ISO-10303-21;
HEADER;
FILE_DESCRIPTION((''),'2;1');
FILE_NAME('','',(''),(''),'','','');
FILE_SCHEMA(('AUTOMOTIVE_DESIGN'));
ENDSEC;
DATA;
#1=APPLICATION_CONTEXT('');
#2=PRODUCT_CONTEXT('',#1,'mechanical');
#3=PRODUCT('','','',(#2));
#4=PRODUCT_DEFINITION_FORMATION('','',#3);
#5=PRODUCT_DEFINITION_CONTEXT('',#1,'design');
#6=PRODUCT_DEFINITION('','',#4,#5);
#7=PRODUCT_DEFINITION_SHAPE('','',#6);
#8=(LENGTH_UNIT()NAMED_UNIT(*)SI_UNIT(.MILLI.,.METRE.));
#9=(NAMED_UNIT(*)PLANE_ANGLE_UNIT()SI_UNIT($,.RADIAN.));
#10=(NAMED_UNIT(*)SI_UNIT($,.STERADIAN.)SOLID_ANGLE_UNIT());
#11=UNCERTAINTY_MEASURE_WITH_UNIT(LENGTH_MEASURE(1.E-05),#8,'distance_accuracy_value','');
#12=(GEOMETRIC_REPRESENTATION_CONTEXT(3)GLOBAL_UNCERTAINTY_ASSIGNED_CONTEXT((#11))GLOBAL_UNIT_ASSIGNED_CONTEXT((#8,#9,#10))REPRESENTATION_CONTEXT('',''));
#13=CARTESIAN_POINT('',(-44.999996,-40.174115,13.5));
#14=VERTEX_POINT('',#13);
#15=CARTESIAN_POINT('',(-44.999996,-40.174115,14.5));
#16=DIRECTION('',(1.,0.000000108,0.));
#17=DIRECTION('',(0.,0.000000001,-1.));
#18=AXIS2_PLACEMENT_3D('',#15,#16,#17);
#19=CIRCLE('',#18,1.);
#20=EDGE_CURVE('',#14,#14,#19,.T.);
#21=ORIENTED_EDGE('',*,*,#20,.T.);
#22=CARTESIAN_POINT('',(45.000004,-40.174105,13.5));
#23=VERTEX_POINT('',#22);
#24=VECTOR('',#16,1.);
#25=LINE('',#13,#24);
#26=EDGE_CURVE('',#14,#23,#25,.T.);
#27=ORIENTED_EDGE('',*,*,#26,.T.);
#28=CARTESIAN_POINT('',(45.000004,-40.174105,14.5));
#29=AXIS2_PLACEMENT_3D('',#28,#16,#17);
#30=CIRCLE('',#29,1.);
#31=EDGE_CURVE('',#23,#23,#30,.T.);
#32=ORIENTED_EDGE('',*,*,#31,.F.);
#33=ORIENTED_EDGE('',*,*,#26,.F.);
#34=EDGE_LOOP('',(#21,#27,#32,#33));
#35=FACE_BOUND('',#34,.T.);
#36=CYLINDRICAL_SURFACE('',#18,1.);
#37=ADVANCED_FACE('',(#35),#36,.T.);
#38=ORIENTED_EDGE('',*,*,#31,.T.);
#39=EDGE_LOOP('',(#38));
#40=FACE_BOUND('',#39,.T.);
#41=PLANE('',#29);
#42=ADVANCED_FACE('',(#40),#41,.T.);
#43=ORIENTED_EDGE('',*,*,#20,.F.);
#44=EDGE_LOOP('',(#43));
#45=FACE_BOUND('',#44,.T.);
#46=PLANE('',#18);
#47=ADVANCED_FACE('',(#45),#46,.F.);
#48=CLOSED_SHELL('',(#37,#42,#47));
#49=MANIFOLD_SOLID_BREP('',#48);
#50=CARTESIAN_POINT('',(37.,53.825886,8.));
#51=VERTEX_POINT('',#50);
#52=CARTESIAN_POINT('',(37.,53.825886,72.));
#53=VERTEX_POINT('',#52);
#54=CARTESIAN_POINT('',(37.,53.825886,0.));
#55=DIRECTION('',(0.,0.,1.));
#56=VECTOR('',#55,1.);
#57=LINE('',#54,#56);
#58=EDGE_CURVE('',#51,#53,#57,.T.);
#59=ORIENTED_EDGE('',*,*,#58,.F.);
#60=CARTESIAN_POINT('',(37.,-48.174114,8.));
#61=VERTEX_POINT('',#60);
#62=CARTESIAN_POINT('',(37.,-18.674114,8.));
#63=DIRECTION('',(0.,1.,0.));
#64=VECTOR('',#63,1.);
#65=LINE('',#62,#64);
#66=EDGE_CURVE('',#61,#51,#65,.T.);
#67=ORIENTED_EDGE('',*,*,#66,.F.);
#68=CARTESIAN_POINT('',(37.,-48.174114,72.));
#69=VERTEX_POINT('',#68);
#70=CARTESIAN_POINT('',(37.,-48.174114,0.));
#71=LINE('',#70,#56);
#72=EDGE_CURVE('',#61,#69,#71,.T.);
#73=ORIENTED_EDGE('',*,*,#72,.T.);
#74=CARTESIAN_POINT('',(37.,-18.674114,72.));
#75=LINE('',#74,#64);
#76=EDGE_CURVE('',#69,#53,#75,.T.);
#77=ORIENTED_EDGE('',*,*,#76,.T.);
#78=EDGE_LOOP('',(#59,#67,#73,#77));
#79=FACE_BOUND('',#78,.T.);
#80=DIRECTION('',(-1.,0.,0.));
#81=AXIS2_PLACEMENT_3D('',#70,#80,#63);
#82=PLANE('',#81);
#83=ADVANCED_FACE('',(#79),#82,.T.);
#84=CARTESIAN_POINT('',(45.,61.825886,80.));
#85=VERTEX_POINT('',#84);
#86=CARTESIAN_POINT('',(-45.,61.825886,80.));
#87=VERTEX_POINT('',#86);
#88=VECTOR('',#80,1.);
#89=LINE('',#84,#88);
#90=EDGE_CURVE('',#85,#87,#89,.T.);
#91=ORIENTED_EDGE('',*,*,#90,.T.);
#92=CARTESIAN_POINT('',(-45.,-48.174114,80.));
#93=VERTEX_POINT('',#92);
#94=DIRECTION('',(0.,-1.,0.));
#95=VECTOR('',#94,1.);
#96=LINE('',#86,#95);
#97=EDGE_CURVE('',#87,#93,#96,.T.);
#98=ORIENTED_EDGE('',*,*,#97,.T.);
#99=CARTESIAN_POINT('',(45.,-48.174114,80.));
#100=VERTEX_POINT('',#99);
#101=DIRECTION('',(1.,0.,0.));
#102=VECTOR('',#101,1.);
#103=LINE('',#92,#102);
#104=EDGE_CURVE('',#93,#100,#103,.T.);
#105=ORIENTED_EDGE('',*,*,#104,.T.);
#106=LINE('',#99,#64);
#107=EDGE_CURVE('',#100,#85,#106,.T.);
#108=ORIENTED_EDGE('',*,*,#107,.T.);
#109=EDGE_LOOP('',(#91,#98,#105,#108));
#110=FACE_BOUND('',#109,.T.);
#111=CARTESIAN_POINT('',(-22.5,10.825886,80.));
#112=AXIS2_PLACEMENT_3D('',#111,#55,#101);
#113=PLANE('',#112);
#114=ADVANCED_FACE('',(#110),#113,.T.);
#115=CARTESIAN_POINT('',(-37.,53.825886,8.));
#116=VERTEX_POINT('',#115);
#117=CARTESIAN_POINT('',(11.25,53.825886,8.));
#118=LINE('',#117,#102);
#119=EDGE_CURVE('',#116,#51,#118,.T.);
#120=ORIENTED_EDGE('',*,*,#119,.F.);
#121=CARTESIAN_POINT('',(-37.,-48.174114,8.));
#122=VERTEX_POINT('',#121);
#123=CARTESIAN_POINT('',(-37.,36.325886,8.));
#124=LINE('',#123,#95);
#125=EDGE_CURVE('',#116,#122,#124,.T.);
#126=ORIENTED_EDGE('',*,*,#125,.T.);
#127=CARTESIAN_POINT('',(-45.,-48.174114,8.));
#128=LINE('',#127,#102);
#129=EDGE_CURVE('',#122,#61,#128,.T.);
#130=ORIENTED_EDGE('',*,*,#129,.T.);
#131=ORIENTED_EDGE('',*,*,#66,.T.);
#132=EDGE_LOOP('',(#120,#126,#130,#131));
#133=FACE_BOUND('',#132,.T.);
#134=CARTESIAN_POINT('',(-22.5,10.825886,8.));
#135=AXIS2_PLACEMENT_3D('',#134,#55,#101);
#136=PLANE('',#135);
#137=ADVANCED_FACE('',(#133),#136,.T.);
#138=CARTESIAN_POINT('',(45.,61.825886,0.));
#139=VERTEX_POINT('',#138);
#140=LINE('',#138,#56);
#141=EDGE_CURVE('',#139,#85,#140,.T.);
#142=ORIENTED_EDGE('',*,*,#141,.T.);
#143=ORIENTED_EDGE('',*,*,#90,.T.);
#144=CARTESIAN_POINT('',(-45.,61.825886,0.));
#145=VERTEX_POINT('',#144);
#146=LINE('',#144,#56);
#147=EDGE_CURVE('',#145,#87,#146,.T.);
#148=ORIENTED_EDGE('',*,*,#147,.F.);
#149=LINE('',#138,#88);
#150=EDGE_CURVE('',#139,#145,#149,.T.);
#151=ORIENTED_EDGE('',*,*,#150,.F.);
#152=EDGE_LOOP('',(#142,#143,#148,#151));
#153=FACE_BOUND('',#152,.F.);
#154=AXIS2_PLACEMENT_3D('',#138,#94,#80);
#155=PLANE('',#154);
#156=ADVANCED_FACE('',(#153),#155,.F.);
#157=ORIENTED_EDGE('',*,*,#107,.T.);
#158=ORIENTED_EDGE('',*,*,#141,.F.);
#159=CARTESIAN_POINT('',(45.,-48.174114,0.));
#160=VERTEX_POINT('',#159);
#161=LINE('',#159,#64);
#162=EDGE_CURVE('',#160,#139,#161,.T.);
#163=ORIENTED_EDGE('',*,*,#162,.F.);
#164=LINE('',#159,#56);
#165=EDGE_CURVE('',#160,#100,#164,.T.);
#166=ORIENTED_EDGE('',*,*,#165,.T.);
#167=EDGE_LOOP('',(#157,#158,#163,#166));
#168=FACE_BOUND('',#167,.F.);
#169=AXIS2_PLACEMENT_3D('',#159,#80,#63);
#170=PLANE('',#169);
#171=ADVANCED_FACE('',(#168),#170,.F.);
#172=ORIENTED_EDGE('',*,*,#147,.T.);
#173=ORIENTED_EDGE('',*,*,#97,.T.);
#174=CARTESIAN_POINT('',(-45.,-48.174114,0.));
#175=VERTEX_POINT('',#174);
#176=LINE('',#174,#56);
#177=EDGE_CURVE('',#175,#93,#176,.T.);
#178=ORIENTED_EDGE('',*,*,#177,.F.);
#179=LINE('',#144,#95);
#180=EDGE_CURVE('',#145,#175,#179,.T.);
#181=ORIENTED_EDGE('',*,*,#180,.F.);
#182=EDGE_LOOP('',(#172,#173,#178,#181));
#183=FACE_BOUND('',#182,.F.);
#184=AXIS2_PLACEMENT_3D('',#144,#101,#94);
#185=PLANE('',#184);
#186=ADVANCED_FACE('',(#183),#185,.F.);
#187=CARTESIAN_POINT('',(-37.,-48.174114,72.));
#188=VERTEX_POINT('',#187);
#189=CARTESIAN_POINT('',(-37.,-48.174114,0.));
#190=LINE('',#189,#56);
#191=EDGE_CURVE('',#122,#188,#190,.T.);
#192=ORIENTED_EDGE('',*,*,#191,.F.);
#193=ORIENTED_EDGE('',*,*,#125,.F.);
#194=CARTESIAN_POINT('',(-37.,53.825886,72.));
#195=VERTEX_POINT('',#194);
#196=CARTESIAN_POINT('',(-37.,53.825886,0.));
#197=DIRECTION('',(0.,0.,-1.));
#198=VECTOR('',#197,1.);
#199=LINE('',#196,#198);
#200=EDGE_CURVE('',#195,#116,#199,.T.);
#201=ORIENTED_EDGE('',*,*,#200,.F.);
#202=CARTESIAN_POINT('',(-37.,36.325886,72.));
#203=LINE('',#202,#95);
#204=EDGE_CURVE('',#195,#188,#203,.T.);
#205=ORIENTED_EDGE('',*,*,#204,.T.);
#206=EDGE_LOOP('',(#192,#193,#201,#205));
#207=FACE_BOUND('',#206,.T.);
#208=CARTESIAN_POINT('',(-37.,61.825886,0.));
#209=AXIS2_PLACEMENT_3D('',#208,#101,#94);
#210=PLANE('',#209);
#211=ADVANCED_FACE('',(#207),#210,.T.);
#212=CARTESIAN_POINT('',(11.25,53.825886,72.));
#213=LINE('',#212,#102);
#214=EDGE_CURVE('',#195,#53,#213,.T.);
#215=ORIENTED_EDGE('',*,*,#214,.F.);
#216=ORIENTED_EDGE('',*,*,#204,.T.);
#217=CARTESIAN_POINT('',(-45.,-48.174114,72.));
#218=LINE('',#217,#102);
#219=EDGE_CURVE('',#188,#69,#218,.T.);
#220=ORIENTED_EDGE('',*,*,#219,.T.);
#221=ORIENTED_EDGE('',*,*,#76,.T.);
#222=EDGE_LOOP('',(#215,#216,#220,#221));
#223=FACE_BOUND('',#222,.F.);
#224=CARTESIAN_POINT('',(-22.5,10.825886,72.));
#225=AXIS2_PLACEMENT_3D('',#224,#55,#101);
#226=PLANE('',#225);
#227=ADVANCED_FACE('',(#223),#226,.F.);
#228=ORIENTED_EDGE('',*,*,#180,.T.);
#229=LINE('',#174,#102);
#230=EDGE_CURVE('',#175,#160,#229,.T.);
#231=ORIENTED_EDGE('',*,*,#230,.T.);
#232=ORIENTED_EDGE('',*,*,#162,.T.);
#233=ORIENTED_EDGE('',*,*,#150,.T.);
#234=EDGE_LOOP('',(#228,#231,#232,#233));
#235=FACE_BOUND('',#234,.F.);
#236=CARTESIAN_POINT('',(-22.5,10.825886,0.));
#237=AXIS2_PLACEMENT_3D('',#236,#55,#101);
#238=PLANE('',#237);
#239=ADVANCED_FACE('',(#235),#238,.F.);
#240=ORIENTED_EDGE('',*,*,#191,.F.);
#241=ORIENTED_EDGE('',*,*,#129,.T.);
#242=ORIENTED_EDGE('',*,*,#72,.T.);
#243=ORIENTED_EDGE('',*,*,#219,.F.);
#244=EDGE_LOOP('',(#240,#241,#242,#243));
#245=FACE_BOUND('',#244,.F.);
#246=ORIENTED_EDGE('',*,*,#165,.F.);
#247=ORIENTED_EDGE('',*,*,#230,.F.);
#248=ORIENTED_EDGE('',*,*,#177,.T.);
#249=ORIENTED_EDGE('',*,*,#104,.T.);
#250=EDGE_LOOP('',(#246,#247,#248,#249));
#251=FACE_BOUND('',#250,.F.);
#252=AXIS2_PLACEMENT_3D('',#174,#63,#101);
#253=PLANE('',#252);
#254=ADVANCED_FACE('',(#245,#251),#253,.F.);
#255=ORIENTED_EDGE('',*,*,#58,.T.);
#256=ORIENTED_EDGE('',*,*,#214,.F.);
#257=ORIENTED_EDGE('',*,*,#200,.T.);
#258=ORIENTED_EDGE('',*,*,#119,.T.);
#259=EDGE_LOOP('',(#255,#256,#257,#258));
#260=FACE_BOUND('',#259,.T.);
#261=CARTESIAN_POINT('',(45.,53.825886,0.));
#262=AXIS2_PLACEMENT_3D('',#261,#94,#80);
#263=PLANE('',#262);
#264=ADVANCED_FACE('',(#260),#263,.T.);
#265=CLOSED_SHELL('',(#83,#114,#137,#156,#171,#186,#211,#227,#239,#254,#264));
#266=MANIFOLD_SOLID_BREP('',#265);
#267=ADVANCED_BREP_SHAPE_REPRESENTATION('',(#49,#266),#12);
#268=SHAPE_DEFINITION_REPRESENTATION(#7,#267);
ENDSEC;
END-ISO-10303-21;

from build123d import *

# Parameters (mm, degrees)
F0_W     = 45
F0_H     = 102
F0_H_2   = 8
F1_DEPTH = 80
F2_T     = -8


# Not quite as in the source:
# - a feature names something its author has since deleted; it is built from what else it names


with BuildPart() as f1:
    # F0 (on Top) → F1 (new body)
    with BuildSketch(Plane.XY):
        with Locations((-22.5, 10.8258862279)):
            Rectangle(F0_W, F0_H)
        with Locations((22.5, 10.8258862279)):
            Rectangle(F0_W, F0_H)
        with Locations((22.5, -44.1741137721)):
            Rectangle(F0_W, F0_H_2)
        with Locations((-22.5, -44.1741137721)):
            Rectangle(F0_W, F0_H_2)
    extrude(amount=F1_DEPTH)

    # F2
    f2_openings = [f1.faces().sort_by_distance(p)[0] for p in [
        (0, -48.174114, 40),
    ]]
    offset(amount=F2_T, openings=f2_openings)


with BuildPart() as f6:
    # F5 (on 3pt) → F6 (revolve)
    with BuildSketch(Plane(origin=(4.3298e-06, -40.17411, 0), x_dir=(1, 1.078e-07, 0), z_dir=(1.078e-07, -1, 0))):
        Polygon((-45, 13.5), (0, 13.5), (45, 13.5), (45, 14.5), (0, 14.5), (-45, 14.5), align=None)
    revolve(axis=Axis((22.5000043298, -40.174107575, 14.5), (1, 1.078e-07, 0)))


solid = Compound([f1.part, f6.part])
